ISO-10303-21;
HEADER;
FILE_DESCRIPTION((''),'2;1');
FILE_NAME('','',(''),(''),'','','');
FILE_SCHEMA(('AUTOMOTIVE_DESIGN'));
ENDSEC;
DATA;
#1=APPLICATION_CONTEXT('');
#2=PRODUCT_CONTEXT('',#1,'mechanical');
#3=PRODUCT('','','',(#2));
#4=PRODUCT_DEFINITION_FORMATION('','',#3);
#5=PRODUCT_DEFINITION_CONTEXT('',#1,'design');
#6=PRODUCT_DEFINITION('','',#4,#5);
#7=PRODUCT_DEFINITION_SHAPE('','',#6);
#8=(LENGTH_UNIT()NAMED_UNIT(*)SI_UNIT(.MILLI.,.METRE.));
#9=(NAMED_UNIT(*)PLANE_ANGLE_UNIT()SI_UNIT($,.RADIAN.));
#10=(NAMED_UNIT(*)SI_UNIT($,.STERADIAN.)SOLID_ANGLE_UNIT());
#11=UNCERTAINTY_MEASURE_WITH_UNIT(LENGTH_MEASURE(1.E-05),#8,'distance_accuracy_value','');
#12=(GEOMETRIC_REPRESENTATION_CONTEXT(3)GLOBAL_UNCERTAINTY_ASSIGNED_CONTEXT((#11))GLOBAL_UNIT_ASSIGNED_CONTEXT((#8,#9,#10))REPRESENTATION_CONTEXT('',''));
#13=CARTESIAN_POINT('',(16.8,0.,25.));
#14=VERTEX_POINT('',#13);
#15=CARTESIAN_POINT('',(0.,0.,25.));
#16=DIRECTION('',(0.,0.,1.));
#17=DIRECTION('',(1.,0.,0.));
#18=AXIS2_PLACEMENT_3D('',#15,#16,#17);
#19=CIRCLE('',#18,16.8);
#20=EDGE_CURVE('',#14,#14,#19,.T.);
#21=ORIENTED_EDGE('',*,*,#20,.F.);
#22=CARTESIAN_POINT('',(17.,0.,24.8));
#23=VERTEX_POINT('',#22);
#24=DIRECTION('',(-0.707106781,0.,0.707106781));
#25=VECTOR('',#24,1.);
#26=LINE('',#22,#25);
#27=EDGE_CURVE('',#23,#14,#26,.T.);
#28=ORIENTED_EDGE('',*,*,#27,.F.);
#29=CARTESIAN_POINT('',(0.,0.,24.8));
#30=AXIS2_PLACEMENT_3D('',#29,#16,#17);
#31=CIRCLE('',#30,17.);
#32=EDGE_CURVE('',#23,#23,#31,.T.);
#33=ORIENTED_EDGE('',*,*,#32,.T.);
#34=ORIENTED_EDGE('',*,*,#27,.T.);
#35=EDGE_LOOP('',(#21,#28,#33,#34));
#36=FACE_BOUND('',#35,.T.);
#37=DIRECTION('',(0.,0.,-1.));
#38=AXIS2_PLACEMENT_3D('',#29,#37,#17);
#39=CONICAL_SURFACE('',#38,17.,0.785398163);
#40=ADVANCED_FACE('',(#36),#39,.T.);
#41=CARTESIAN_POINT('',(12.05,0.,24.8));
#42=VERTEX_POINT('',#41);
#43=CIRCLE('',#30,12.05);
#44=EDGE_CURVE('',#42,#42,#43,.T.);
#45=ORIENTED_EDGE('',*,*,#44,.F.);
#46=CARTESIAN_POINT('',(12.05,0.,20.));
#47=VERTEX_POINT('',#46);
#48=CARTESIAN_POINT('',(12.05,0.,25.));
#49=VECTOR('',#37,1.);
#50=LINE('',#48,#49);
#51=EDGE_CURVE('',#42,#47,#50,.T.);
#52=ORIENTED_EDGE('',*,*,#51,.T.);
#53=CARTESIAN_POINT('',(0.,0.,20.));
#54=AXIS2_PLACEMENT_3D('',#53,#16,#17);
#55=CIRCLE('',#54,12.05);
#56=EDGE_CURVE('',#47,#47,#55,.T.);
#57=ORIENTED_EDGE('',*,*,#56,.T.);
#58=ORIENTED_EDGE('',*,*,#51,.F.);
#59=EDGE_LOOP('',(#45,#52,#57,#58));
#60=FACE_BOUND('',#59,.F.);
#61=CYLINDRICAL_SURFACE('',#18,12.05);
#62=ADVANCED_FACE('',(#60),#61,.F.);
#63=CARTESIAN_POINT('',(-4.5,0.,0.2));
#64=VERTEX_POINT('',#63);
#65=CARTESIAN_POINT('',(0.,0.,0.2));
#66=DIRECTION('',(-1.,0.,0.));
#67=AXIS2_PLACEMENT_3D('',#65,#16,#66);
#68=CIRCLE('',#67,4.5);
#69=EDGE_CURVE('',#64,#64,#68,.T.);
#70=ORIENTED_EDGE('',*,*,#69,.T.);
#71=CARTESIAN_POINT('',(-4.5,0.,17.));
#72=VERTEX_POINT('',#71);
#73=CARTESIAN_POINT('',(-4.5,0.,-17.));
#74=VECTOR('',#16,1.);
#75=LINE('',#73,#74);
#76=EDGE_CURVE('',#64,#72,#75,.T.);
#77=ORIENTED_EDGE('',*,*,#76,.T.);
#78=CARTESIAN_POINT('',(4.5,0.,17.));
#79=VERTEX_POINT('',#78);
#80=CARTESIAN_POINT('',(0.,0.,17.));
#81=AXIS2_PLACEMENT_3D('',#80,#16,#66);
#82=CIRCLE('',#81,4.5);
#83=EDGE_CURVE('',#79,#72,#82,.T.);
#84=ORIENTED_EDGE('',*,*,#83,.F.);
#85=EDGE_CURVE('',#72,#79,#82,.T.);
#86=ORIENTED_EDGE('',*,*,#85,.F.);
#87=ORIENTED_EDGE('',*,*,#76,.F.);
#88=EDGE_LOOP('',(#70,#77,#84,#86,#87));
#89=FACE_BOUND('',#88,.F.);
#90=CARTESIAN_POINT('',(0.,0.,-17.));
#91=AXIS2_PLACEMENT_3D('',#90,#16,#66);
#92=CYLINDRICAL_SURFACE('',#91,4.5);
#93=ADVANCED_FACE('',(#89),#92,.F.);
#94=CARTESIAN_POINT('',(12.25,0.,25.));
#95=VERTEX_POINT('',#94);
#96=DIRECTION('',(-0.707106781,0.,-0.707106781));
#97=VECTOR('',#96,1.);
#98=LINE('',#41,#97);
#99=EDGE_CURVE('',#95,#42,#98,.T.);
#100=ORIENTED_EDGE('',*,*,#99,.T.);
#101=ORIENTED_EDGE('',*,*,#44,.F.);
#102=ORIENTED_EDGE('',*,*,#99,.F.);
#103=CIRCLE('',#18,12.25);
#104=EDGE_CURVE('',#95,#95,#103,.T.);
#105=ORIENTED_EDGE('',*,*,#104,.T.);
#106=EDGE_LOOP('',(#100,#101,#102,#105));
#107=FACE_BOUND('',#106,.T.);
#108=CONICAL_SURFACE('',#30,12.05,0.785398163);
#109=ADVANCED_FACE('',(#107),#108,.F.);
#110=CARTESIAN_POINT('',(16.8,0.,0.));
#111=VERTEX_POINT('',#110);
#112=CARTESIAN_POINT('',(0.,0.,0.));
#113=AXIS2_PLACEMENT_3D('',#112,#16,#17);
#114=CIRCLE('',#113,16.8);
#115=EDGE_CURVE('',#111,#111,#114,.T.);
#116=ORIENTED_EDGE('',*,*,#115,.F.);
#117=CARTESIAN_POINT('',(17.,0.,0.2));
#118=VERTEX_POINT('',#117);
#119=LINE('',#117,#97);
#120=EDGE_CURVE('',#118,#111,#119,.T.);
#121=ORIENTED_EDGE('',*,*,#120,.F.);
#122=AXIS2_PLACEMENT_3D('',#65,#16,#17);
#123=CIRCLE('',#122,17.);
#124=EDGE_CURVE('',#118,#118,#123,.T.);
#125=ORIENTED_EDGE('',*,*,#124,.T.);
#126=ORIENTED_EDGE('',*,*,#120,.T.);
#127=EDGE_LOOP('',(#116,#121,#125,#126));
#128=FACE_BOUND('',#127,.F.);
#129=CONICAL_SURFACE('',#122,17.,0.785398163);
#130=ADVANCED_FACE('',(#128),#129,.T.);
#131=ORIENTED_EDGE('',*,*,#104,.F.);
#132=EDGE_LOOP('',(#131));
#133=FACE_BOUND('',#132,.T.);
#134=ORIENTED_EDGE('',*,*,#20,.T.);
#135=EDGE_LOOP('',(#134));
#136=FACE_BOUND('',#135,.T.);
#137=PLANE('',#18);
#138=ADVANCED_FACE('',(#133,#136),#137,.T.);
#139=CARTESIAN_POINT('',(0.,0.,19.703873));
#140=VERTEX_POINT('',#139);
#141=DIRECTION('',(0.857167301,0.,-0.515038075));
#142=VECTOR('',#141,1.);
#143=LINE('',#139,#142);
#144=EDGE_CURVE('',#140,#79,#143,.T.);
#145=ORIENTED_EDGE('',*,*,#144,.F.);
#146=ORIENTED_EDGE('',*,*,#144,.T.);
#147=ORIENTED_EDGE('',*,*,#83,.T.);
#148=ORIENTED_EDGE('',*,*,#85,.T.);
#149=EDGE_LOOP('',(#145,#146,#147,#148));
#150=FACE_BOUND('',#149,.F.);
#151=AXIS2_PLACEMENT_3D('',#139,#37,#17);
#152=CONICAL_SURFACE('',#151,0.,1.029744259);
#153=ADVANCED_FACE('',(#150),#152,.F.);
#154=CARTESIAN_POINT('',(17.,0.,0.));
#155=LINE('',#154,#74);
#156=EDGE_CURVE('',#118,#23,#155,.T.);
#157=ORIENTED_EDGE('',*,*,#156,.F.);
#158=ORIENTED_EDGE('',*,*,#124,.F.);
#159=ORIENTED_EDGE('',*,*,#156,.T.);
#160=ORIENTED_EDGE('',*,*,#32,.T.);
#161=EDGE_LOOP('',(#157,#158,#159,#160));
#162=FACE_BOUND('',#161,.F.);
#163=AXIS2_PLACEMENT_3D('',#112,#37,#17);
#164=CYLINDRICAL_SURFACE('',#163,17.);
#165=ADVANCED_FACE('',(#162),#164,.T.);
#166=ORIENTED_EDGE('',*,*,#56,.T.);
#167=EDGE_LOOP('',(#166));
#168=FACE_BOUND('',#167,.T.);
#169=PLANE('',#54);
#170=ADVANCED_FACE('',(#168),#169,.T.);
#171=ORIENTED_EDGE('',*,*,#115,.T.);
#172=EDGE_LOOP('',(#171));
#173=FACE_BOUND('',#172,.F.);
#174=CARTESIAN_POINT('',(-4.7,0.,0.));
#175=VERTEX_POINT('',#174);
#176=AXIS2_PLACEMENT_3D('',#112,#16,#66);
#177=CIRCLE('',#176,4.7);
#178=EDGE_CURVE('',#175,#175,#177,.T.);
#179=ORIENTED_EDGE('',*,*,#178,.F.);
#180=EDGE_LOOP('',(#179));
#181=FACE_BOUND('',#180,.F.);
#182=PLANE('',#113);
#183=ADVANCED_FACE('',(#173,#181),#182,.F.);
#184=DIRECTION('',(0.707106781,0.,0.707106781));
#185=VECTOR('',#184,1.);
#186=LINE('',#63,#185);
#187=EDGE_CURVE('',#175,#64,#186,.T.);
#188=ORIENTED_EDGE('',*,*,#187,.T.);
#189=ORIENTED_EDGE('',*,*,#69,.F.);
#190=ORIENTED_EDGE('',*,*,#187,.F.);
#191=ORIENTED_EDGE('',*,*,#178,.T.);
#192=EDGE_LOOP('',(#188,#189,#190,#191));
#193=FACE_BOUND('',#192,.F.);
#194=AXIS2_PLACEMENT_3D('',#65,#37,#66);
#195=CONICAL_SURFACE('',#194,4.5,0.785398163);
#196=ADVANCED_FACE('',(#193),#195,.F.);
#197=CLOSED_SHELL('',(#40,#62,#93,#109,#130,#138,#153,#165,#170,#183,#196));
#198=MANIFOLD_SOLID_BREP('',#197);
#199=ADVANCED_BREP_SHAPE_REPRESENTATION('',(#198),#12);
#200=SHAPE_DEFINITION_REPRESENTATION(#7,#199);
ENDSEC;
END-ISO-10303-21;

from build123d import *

# Parameters (mm, degrees)
F0_R     = 17
F1_DEPTH = 25
F3_D     = 9
F3_DEPTH = 17
F3_TIP   = 2.7038727856
F4_R     = 12.05
F5_DEPTH = 5
F6_SIZE  = 0.2


with BuildPart() as f1:
    # F0 (on Top) → F1 (new body)
    with BuildSketch(Plane.XY):
        Circle(F0_R)
    extrude(amount=F1_DEPTH)

    # F3
    with Locations(Plane(origin=(0, 0, 0), x_dir=(1, 0, 0), z_dir=(0, 0, -1))):
        with Locations((0, 0)):
            Hole(F3_D / 2, depth=F3_DEPTH)
            with Locations((0, 0, -(F3_DEPTH + F3_TIP / 2))):  # 118° drill point
                Cone(0, F3_D / 2, F3_TIP, mode=Mode.SUBTRACT)

    # F4 (on face) → F5 (cut)
    with BuildSketch(Plane.XY.offset(25)):
        Circle(F4_R)
    extrude(amount=-F5_DEPTH, mode=Mode.SUBTRACT)

    # F6
    f6_edges = [f1.edges().sort_by_distance(p)[0] for p in [
        (-17, 0, 25),
        (-12.05, 0, 25),
        (-17, 0, 0),
        (-4.5, 0, 0),
    ]]
    chamfer(f6_edges, length=F6_SIZE)


solid = f1.part
